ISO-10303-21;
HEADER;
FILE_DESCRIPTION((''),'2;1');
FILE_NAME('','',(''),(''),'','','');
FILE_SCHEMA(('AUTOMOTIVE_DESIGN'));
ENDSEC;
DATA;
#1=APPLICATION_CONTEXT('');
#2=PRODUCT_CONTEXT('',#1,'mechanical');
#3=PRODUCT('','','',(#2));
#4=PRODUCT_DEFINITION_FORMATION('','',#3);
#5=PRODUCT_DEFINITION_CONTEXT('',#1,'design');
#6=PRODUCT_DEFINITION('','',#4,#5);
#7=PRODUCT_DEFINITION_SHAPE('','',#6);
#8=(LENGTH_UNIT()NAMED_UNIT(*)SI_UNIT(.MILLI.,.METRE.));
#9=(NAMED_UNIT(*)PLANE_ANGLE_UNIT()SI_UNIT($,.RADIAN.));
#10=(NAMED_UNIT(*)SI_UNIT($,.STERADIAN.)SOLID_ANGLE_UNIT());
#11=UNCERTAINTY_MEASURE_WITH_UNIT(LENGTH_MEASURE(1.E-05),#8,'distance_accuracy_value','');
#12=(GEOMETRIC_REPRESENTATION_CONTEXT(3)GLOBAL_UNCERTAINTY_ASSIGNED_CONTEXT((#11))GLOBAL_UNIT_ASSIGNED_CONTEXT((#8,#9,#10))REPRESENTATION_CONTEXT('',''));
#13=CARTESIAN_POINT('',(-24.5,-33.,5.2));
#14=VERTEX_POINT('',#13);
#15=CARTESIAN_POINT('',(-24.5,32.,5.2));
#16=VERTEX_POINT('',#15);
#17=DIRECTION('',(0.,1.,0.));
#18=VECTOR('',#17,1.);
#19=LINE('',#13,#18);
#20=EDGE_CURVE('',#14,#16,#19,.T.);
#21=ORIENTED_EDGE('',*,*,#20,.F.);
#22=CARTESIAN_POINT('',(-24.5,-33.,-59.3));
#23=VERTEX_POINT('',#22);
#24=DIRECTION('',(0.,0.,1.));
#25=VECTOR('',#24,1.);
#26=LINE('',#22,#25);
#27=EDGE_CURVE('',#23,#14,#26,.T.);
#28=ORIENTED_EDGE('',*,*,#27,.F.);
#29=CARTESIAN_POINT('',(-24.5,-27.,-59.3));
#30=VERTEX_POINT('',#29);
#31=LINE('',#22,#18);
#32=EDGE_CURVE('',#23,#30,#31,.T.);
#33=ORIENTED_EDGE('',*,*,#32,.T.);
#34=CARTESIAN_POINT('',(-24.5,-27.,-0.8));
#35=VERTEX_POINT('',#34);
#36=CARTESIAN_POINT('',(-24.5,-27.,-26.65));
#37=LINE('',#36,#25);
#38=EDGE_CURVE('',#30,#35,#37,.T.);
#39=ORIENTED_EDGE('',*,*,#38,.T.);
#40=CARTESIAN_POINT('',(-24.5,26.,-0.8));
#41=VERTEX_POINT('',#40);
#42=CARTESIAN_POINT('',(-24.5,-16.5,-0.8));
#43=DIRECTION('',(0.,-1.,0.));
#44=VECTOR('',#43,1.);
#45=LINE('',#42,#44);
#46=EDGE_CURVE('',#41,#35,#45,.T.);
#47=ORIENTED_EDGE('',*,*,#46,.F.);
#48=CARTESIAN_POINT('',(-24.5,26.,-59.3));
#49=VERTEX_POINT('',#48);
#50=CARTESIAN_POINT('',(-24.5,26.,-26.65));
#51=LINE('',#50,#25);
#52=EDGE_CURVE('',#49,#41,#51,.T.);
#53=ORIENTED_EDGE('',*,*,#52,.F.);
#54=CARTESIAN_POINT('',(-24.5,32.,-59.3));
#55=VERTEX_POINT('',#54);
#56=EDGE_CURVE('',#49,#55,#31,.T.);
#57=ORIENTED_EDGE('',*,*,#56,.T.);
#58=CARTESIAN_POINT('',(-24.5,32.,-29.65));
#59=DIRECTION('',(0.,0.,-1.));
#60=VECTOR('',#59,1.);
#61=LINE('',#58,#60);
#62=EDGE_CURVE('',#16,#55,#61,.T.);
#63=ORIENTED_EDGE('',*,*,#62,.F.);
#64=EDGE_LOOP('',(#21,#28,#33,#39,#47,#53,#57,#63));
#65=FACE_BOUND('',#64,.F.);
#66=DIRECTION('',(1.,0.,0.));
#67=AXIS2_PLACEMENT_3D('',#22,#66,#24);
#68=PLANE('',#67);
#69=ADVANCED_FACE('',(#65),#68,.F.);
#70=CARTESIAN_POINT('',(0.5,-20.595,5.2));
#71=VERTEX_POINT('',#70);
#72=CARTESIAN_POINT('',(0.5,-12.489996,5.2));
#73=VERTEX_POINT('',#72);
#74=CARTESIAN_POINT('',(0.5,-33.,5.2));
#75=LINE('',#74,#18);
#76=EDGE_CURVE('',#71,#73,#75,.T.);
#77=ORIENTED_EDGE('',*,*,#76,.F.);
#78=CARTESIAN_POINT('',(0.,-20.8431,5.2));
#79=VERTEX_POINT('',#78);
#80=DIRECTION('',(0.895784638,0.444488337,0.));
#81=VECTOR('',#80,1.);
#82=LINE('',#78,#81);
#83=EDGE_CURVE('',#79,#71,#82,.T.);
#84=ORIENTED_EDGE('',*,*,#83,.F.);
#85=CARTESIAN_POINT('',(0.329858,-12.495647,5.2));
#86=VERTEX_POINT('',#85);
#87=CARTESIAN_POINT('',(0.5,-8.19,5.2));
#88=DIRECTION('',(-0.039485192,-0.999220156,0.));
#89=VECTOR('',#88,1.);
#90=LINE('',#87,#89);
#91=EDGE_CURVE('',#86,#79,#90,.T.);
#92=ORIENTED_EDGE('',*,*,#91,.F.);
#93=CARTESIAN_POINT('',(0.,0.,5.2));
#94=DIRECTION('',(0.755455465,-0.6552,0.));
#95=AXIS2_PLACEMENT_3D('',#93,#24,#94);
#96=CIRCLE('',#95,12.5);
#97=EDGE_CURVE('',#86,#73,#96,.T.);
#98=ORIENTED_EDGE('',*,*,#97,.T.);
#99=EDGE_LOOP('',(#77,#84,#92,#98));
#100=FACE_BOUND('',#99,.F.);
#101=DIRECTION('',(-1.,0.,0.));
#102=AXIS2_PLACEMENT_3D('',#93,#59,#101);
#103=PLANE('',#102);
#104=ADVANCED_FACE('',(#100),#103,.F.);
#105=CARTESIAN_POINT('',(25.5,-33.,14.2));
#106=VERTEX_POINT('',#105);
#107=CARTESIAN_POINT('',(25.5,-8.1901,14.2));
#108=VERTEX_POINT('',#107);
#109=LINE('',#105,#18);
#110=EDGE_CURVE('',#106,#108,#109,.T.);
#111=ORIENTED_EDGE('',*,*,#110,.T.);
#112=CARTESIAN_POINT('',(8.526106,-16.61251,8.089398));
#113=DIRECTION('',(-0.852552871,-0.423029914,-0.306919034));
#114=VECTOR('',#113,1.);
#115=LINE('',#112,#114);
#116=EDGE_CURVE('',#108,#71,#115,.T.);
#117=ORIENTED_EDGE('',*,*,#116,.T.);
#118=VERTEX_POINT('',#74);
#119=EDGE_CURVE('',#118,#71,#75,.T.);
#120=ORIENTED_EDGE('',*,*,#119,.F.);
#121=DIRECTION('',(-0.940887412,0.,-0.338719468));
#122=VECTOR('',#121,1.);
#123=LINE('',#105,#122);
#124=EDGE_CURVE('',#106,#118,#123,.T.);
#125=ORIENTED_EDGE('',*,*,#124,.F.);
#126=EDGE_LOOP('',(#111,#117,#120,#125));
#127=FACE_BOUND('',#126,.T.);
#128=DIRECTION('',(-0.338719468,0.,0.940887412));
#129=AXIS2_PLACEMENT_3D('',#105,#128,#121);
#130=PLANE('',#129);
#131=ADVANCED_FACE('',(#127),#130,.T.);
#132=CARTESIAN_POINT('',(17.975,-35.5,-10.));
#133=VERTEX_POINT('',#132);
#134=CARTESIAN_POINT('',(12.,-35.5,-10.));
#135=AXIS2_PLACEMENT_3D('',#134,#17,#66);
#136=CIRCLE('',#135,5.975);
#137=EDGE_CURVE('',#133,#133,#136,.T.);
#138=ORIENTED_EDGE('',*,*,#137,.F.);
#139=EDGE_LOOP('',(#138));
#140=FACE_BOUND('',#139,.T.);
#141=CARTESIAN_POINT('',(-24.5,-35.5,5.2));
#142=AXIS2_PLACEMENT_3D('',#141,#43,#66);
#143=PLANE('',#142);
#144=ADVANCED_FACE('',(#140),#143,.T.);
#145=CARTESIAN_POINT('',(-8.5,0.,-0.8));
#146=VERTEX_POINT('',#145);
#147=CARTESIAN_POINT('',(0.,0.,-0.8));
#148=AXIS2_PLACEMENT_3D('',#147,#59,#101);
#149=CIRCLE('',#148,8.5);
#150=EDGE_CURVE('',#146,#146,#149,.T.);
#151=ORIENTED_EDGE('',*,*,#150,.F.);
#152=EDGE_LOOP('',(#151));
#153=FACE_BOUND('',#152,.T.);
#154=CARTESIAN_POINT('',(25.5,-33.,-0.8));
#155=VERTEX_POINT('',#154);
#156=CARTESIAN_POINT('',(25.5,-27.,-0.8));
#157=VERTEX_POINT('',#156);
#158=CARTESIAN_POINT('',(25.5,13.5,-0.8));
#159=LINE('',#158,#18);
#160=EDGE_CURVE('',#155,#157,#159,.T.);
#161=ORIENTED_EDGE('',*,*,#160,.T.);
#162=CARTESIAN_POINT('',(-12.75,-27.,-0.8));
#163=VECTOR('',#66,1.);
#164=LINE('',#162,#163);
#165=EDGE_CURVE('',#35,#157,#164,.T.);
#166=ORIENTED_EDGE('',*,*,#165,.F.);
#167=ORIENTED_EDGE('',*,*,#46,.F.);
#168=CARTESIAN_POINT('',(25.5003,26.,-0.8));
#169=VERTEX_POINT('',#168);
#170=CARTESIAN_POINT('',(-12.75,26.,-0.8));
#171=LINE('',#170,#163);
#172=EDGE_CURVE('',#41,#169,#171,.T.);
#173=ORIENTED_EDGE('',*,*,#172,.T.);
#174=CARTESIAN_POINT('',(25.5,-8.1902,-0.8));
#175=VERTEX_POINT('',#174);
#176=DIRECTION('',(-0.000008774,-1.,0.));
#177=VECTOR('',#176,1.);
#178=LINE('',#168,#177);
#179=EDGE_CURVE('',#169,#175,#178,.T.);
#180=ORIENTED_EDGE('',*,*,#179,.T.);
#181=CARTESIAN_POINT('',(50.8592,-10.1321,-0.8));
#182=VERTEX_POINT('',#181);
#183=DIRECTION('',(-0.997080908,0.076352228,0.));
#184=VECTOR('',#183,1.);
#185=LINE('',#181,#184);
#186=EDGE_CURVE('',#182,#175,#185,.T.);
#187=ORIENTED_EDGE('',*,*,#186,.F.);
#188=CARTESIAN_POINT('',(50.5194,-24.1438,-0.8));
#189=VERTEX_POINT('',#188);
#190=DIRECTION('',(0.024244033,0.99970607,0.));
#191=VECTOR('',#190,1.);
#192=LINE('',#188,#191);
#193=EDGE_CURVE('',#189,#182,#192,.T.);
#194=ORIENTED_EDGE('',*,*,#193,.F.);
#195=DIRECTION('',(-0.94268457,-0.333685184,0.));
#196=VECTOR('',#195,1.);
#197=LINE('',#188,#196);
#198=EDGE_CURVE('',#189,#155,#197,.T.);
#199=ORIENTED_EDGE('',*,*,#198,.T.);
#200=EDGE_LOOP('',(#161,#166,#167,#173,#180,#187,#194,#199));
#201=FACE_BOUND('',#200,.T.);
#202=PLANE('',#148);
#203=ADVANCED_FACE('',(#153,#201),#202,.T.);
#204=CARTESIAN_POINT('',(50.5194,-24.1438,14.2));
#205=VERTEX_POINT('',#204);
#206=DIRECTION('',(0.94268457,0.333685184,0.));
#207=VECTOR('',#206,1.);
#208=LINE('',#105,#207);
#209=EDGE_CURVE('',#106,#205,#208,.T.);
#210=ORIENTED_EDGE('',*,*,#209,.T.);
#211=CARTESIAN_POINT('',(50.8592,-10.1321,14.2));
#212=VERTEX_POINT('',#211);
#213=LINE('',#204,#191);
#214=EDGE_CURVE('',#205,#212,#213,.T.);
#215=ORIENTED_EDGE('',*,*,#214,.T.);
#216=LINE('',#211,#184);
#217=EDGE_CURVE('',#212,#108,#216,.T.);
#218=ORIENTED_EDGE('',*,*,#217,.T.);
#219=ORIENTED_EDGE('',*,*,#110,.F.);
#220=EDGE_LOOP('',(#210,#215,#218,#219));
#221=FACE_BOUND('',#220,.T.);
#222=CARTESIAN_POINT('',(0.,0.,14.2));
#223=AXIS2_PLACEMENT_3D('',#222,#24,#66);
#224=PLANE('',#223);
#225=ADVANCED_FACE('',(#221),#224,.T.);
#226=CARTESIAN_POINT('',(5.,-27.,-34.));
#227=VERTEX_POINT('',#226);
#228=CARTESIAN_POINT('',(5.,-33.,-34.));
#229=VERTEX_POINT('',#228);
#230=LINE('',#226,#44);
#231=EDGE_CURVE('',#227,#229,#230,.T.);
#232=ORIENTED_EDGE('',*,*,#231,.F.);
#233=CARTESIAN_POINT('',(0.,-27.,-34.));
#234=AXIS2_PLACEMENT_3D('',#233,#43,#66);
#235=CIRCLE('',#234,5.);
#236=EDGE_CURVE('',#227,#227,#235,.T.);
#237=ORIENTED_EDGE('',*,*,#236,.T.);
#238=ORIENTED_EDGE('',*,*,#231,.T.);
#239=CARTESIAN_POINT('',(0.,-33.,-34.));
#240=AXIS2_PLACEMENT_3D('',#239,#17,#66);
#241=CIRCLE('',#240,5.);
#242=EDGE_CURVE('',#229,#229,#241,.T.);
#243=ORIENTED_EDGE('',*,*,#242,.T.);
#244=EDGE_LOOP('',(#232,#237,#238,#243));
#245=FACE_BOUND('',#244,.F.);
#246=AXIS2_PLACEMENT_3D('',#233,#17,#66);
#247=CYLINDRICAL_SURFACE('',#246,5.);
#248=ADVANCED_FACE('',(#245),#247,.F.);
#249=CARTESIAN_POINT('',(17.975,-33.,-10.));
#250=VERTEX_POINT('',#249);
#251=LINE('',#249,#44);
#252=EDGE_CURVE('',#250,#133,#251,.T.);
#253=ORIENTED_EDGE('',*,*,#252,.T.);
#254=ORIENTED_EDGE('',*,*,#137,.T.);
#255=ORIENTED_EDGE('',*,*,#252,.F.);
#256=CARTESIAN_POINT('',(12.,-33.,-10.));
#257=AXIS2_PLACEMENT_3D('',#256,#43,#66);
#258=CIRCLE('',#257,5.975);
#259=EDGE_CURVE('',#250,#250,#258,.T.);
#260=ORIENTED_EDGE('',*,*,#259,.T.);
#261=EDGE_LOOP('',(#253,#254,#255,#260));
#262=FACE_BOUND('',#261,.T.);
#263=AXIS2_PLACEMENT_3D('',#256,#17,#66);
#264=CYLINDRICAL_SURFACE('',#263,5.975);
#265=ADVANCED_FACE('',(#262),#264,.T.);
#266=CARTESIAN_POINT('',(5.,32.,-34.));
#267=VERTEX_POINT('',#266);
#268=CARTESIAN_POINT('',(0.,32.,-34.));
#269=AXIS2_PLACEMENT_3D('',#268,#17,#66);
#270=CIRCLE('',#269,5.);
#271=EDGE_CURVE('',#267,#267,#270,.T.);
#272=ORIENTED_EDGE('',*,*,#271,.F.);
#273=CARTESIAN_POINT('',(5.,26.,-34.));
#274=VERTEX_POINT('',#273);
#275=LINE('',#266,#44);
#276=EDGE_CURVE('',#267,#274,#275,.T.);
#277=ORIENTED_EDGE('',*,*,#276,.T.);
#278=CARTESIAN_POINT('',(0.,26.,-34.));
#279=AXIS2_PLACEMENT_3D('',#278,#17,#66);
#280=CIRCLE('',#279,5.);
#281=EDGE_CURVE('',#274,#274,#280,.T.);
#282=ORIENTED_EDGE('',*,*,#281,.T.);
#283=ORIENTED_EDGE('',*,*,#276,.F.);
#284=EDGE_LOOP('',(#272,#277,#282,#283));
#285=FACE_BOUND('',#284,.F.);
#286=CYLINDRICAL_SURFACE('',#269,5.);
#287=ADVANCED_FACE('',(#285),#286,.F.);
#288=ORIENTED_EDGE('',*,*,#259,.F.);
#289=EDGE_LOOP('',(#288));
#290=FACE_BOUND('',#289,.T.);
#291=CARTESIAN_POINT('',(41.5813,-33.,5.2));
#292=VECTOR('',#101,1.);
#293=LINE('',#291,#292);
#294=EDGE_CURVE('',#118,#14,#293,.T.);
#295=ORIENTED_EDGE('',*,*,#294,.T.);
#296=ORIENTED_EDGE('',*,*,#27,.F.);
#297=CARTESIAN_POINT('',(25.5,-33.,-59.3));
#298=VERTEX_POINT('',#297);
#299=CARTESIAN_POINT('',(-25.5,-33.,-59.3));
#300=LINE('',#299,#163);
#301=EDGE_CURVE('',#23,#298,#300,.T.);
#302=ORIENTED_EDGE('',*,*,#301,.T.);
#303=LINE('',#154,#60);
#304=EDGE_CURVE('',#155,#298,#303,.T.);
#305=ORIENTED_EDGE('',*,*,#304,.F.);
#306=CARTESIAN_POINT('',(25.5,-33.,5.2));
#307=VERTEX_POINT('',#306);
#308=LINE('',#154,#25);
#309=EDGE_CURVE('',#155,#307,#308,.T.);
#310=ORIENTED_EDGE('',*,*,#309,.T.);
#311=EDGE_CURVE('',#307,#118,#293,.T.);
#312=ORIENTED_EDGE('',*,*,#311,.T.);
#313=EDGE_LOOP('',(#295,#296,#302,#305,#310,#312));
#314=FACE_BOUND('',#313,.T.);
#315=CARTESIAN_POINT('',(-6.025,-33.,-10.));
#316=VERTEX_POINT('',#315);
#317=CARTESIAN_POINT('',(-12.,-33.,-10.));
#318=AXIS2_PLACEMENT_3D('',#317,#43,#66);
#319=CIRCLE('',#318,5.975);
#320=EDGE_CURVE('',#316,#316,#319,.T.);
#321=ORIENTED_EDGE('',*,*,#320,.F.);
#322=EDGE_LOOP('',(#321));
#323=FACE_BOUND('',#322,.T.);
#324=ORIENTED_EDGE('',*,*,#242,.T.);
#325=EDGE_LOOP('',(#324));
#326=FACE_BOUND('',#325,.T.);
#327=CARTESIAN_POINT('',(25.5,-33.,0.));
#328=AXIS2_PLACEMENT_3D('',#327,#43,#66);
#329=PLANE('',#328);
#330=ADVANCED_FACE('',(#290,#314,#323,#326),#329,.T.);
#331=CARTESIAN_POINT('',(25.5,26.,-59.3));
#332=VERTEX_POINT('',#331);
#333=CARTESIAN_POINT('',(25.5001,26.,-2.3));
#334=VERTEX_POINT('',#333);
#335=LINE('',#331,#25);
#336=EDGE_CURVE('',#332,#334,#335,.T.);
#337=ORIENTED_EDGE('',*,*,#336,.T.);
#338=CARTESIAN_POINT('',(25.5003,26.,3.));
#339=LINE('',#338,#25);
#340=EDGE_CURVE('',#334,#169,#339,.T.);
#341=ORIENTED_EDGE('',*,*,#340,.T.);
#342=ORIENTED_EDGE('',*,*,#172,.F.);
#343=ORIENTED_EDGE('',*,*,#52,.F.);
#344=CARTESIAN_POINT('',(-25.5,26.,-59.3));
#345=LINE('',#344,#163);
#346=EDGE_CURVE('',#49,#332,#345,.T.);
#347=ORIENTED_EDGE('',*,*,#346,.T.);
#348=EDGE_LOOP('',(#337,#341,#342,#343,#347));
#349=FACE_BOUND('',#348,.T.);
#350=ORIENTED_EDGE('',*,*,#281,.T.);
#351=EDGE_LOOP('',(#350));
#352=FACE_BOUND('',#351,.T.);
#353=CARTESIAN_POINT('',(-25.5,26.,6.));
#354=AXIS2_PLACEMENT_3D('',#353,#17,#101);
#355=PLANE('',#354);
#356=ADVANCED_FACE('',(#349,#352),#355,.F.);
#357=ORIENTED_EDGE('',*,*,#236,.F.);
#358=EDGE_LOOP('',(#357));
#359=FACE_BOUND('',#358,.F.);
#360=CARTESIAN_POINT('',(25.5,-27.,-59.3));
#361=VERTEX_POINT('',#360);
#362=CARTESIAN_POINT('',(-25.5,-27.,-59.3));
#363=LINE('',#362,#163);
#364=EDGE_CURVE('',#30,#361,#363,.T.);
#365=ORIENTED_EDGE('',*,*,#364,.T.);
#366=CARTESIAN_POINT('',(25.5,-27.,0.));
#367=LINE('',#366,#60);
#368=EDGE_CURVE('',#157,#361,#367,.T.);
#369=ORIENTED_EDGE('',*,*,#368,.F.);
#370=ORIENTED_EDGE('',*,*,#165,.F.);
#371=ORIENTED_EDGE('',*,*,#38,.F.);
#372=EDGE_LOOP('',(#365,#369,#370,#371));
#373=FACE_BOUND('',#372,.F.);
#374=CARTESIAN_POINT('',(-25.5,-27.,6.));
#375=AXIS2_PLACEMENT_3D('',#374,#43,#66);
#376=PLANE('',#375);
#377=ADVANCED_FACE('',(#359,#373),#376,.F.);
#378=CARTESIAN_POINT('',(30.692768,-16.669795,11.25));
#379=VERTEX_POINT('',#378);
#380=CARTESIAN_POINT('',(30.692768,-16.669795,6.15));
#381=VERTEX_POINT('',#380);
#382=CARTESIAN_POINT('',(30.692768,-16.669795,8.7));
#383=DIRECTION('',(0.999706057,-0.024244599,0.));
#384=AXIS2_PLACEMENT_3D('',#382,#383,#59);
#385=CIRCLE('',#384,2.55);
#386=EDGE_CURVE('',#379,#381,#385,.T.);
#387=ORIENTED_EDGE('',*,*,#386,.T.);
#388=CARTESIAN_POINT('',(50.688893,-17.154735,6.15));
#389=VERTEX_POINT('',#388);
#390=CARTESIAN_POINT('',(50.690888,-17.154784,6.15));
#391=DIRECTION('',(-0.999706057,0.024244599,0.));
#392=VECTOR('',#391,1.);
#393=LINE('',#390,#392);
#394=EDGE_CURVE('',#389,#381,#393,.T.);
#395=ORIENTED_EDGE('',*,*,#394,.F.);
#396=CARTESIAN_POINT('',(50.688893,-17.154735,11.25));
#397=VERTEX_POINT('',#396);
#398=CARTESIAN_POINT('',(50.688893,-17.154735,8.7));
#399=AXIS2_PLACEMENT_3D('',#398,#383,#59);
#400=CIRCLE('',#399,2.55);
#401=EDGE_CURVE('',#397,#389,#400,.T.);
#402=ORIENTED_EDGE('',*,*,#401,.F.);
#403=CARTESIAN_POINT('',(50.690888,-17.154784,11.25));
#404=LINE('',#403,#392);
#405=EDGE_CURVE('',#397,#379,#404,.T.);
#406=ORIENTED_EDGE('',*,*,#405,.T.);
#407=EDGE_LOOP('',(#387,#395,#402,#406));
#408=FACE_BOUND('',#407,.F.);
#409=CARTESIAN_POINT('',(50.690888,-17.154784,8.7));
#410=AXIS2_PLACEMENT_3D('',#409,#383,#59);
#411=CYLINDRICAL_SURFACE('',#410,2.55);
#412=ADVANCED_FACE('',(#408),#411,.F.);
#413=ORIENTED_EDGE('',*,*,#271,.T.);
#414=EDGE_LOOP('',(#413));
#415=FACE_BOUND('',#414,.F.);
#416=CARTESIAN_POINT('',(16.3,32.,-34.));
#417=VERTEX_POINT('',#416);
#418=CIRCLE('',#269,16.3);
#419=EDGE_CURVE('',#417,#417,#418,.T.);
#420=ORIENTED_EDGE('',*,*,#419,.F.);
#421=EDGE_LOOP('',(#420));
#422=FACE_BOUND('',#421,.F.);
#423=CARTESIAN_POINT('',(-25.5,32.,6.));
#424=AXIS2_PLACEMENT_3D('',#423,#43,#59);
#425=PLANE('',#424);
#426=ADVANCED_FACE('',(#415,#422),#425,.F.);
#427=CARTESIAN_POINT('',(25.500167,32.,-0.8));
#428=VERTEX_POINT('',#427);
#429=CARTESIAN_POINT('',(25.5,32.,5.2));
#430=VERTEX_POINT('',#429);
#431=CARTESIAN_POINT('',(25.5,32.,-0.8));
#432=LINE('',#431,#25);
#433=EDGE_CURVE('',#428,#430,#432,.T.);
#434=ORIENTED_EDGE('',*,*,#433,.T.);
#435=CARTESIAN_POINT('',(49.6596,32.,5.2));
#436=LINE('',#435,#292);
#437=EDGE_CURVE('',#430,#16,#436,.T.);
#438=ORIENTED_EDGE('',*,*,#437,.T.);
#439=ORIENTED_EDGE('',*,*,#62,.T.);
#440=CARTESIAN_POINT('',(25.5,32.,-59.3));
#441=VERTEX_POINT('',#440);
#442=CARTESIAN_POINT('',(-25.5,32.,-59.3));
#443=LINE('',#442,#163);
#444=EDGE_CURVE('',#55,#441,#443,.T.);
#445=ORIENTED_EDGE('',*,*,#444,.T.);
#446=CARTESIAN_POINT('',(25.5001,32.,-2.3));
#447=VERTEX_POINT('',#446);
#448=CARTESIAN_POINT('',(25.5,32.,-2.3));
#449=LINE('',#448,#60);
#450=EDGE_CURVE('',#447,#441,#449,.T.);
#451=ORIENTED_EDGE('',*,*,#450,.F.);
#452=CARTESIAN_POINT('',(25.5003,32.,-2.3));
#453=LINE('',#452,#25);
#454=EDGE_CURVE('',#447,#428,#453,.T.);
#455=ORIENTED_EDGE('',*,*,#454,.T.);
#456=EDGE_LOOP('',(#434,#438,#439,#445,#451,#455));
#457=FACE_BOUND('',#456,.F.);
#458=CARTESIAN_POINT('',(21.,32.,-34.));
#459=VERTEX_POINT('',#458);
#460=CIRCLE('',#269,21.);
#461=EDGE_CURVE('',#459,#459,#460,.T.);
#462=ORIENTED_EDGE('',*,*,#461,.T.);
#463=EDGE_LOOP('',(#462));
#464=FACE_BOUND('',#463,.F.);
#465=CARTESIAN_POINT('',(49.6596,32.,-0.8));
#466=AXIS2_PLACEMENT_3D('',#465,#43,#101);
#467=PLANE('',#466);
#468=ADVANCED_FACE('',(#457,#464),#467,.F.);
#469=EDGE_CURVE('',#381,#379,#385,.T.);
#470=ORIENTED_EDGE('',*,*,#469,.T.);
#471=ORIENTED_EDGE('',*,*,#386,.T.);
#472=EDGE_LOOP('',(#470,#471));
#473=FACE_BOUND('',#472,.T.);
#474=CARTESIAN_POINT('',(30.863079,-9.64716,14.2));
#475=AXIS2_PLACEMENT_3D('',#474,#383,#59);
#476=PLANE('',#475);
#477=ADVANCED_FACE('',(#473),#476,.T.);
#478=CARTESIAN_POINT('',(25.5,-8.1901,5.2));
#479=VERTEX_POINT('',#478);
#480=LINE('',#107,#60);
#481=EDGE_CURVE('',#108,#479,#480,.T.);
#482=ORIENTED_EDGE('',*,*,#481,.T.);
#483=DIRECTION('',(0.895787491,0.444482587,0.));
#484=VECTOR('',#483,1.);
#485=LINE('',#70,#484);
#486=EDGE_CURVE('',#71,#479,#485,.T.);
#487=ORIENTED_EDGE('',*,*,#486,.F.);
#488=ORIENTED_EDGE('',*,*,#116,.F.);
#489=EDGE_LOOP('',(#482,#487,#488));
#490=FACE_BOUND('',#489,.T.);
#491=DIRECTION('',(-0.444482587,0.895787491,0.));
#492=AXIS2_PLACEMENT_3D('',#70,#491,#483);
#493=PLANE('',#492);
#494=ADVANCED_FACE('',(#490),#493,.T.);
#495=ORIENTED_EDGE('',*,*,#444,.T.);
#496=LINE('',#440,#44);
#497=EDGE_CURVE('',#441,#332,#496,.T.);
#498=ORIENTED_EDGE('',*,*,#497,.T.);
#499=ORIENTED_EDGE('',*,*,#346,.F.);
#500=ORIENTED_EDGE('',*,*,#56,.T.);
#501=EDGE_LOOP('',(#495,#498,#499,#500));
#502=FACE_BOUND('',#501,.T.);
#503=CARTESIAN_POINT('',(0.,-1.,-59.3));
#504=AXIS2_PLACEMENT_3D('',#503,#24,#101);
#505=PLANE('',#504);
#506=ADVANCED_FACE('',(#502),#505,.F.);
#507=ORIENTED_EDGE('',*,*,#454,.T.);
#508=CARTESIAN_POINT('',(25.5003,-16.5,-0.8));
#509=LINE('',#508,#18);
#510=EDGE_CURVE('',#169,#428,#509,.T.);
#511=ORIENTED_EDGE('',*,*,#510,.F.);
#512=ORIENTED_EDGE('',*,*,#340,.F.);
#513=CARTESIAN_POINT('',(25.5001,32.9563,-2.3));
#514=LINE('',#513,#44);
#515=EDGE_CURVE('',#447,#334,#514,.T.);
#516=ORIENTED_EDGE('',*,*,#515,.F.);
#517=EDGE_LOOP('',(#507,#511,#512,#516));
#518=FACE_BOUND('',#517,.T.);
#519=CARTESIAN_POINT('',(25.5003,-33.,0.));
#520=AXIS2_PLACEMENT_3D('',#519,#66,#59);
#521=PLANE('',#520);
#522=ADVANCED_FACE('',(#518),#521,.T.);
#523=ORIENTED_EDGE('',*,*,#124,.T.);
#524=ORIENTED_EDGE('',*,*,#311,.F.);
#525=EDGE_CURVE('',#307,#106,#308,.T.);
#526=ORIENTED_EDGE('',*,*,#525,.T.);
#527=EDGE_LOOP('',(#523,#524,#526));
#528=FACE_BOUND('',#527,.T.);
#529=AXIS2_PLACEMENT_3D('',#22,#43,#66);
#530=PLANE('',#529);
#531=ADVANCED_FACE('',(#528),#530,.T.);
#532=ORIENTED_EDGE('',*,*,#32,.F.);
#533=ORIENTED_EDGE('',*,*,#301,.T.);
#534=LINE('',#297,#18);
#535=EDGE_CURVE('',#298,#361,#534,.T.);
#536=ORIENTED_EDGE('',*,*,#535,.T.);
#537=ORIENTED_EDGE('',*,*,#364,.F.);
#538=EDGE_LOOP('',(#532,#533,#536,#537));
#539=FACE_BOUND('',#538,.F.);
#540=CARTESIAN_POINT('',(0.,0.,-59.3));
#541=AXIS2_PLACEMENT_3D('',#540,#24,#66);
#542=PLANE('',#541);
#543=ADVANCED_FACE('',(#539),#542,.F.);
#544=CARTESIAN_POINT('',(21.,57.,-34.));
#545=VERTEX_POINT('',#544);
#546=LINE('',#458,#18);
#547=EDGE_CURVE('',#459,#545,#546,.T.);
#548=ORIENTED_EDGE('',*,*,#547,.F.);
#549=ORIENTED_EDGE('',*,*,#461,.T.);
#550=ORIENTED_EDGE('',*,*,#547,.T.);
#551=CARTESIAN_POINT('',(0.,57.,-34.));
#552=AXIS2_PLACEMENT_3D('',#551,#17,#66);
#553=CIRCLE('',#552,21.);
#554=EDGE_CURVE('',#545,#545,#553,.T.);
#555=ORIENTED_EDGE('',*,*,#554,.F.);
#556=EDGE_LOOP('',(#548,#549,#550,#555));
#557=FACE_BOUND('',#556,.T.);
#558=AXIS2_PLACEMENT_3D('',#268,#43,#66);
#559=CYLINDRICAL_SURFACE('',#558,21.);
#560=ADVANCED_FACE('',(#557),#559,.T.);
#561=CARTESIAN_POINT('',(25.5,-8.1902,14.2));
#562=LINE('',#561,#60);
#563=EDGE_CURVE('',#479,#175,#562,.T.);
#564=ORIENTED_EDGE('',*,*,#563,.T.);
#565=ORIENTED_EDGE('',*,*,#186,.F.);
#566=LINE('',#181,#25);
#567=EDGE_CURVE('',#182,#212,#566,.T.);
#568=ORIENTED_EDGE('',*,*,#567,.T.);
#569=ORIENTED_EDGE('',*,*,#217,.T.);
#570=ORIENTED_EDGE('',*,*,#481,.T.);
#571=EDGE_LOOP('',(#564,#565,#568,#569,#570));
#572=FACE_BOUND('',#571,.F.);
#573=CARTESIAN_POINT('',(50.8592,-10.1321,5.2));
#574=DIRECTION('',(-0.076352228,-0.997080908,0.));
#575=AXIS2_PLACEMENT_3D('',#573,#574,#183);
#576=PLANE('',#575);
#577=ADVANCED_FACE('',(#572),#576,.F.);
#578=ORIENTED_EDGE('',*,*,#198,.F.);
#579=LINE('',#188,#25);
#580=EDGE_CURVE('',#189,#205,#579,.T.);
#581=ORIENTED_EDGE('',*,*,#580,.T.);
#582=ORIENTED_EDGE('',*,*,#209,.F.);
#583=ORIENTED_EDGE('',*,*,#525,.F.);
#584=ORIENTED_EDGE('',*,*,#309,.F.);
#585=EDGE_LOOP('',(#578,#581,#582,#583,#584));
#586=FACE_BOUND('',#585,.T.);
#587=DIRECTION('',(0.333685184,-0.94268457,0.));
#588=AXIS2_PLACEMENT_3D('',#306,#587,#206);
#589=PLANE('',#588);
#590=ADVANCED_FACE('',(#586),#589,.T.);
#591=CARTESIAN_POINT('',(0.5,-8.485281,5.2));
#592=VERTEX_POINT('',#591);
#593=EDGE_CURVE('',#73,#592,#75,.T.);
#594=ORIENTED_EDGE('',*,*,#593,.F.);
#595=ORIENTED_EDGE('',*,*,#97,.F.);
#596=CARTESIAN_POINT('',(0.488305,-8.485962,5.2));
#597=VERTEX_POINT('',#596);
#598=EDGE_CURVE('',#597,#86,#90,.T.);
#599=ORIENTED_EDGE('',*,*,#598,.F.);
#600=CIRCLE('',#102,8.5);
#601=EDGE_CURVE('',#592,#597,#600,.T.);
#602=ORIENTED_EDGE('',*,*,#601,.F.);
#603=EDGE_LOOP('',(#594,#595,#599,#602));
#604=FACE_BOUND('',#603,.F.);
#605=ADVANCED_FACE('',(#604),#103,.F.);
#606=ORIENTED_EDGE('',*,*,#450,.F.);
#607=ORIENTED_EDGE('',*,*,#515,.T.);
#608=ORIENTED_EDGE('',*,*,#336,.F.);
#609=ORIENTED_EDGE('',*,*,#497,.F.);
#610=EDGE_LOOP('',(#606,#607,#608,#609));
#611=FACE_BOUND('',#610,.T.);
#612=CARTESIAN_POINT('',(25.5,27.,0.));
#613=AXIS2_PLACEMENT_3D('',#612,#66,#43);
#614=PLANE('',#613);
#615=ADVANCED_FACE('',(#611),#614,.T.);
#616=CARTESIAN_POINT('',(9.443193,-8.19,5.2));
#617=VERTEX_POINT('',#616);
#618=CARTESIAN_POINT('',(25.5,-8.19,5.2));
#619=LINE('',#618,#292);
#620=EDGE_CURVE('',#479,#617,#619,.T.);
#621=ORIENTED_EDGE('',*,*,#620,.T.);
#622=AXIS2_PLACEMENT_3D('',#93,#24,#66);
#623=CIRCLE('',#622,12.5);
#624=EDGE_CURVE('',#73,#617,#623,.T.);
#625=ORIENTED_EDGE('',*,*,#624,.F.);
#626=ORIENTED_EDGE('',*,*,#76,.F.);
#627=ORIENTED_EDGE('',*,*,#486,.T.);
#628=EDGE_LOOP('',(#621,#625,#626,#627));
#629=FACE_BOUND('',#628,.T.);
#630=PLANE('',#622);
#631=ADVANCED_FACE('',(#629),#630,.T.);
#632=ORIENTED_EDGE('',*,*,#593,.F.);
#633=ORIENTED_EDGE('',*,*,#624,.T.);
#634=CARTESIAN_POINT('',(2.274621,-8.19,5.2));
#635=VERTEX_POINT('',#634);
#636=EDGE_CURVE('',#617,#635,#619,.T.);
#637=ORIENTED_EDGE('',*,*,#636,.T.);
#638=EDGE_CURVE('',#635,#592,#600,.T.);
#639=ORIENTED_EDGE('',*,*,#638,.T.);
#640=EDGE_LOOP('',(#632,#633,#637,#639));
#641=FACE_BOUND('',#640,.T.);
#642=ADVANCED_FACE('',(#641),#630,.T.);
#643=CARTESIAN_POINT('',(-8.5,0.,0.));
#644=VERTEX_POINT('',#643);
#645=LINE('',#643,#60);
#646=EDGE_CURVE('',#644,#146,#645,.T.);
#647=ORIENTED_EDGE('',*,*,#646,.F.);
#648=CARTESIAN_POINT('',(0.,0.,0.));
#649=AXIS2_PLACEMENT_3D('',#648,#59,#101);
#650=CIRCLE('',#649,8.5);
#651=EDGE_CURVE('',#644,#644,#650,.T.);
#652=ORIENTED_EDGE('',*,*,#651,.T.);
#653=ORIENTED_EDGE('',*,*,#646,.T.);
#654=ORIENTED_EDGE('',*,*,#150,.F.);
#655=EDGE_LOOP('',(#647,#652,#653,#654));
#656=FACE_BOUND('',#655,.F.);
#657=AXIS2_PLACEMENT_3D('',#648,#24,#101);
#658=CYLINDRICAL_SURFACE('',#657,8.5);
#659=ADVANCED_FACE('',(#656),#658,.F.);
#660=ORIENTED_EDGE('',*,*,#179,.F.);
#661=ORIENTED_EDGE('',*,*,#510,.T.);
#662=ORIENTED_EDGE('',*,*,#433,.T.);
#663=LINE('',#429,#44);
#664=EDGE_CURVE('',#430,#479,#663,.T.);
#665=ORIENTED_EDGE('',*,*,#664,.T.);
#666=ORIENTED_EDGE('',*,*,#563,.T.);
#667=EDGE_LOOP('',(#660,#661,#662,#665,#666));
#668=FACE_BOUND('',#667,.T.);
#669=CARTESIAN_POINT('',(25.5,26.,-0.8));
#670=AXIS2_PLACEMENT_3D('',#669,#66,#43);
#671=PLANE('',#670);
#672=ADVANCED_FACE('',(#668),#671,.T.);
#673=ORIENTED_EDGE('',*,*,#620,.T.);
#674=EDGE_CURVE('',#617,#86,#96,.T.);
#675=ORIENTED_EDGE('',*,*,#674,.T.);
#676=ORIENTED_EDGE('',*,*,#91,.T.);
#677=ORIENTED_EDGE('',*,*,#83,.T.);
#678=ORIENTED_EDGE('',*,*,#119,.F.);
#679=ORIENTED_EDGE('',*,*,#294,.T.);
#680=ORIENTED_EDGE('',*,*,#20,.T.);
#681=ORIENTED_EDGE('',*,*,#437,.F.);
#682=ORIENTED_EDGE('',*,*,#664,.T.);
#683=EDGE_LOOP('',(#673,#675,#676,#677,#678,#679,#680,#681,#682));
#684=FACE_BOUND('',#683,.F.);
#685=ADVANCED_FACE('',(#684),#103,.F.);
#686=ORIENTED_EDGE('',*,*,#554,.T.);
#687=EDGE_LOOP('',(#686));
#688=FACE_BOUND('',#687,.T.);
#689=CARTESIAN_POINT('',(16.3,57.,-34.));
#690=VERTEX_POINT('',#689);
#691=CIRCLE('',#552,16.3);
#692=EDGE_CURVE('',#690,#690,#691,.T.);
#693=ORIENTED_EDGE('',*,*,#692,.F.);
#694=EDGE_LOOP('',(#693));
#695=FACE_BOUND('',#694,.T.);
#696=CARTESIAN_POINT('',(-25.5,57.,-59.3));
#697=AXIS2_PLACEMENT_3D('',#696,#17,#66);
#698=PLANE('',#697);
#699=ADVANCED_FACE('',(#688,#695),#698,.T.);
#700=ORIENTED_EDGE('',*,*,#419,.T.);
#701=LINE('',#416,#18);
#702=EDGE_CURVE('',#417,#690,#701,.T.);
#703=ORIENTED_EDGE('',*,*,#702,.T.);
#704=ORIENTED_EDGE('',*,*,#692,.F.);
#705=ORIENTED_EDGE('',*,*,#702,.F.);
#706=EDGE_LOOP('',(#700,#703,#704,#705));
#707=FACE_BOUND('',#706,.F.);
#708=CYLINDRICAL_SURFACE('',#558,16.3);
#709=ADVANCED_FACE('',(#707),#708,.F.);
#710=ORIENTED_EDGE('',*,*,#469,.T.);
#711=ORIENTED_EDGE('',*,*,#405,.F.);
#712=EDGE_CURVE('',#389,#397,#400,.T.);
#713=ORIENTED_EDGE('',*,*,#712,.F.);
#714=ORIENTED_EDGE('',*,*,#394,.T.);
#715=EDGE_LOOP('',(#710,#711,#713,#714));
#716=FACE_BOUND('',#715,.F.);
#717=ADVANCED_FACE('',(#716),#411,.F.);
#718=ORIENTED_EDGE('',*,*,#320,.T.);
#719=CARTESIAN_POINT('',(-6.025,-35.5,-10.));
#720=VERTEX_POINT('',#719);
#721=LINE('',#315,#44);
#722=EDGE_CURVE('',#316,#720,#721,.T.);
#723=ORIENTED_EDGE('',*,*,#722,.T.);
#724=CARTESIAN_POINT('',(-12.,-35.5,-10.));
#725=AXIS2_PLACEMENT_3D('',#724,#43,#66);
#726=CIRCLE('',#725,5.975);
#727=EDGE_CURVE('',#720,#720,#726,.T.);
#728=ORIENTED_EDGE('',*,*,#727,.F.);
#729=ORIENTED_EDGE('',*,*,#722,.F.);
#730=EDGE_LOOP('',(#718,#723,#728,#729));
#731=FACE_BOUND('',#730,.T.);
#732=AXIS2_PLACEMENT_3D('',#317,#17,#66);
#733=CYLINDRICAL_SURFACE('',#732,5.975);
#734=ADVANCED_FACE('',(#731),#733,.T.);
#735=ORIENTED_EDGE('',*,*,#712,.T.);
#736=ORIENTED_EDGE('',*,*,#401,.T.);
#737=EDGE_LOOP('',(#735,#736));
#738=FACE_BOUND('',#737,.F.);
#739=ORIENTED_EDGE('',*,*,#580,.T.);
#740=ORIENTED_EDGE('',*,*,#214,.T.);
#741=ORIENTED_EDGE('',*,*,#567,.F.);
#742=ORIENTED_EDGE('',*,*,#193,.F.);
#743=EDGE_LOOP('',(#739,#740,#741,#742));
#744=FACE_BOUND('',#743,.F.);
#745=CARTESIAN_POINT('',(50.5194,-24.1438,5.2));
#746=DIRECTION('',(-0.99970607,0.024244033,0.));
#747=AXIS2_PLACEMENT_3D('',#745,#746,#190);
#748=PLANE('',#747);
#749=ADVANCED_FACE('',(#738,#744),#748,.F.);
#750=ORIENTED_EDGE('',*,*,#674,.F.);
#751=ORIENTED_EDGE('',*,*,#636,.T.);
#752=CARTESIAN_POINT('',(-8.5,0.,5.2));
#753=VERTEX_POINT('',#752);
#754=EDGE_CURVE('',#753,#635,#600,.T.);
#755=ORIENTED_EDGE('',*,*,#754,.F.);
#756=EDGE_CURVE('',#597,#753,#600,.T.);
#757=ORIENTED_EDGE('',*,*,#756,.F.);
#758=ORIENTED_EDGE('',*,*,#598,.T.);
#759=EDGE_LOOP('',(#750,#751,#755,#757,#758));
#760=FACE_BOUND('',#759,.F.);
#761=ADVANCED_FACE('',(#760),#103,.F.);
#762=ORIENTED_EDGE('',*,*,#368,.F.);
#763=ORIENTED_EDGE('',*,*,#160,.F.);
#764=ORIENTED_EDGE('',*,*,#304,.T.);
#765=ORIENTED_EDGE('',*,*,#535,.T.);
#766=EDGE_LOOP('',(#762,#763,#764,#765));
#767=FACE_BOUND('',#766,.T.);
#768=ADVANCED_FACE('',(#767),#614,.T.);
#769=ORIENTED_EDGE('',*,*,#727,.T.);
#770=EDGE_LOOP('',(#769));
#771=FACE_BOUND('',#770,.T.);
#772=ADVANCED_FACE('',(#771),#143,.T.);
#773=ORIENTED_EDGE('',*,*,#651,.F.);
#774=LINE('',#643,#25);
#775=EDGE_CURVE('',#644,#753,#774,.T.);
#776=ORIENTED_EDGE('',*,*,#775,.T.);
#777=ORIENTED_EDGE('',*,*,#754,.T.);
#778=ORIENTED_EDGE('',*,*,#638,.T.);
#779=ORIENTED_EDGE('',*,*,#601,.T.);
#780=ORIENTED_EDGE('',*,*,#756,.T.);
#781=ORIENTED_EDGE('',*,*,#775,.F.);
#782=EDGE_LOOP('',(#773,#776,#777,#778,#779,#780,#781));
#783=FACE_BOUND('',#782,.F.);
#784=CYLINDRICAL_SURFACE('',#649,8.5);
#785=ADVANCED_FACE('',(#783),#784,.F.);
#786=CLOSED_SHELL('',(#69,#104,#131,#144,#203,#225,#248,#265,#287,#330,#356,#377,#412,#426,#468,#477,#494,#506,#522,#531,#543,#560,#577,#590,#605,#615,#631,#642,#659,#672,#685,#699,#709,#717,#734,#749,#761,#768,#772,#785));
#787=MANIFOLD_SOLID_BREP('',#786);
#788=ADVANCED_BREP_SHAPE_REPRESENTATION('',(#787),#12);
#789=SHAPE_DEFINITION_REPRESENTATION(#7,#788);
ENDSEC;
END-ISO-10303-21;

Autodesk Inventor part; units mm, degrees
sketch "Sketch1" plane through (0, 0, 0) normal (0, 0, 1) x (1, 0, 0)
  line L0 (25.5, -27) -> (-25.5, -27)
  line L1 (-25.5, -27) -> (-25.5, 27)
  line L2 (-25.5, 27) -> (25.5, 27)
  line L3 (25.5, 27) -> (25.5, -27)
  line L4 (25.5, -27) -> (-25.5, 27) construction
  line L5 (-25.5, -27) -> (25.5, 27) construction
  point P0 (0, 0)
  dimension "d0" = 51
  dimension "d1" = 54
extrude "Extrusion1" add sketch "Sketch1" along normal blind 6
sketch "Sketch2" plane through (0, 0, 6) normal (0, 0, 1) x (1, 0, 0)
  circle A0 centre (0, 0) radius 15
  dimension "d4" = 30
sketch "Sketch4" plane through (0, 0, 6) normal (0, 0, 1) x (1, 0, 0)
  line L0 (-25.5, 27) -> (26.5, 27)
  line L1 (-25.5, -27) -> (25.5, -27) projected
  line L2 (25.5, -27) -> (-25.5, -27)
  line L3 (-25.5, -27) -> (-25.5, -33)
  line L4 (-25.5, -33) -> (25.5, -33)
  line L5 (25.5, -33) -> (25.5, -27)
  point P0 (0, 0)
  dimension "d109" = 51
  dimension "d110" = 6
extrude "Extrusion4" add sketch "Sketch4" against normal blind 65.3
ref_plane "Plano de trabajo8" through (25.5, -33.8, -42) normal (1, 0, 0) x (0, 0, -1)
ref_plane "Work Plane9" through (-10.5, -27, -57) normal (0, 1, 0) x (1, 0, 0)
sketch "Sketch25" plane through (-10.5, -27, -57) normal (0, 1, 0) x (1, 0, 0)
  line L0 (0, 0) -> (21, 0) projected
  line L1 (10.5, 0) -> (10.5, -23)
  circle A0 centre (10.5, -23) radius 5
  line L2 (10.5, -23) -> (10.5, -63)
  line L3 (36, -63) -> (-15, -63) projected
  point P0 (10.5, -57)
  dimension "d111" = 23
  dimension "d112" = 10
extrude "Extrusion22" cut sketch "Sketch25" against normal blind 68
ref_plane "Work Plane7" through (-10.5, -0.5, -57) normal (0, 1, 0) x (1, 0, 0)
mirror "Mirror2" about plane through (-10.5, -0.5, -57) normal (0, 1, 0) of "Extrusion4"
extrude "Extrusión28" cut sketch "Sketch2" against normal blind 10
ref_plane "Work Plane10" through (25.5, -34, -42) normal (1, 0, 0) x (0, 0, -1)
ref_plane "Work Plane11" through (-25.5, -87, 1.3) normal (0, 1, 0) x (1, 0, 0)
sketch "Sketch37" plane through (-25.5, 32, 6) normal (0, 1, 0) x (1, 0, 0)
  circle A0 centre (25.5, 40) radius 5 projected
  point P0 (25.5, 6)
extrude "Extrusion33" cut sketch "Sketch37" against normal blind 68
sketch "Sketch43" plane through (0, 0, 6) normal (0, 0, 1) x (1, 0, 0)
  circle A0 centre (0, 0) radius 10.4895
  circle A1 centre (0, 0) radius 15 projected
  circle A2 centre (0, 0) radius 5
  dimension "d182" = 10
extrude "Extrusion40" add sketch "Sketch43" against normal blind 8.3 contours A0 | A1
sketch "Boceto48" plane through (-25.5, -33, 6) normal (0, -1, 0) x (1, 0, 0)
  point P0 (25.5, -6)
sketch "Boceto49" plane through (-25.5, -33, 6) normal (0, -1, 0) x (1, 0, 0)
  point P0 (25.5, -6)
sketch "Boceto50" plane through (25.5, 26, -59.3) normal (0, 0, -1) x (-1, 0, 0)
  point P0 (25.5, -26)
sketch "Boceto77" plane through (0, 0, 6) normal (0, 0, 1) x (1, 0, 0)
  point P0 (0, 0)
sketch "Boceto84" plane through (25.5, -33, -59.3) normal (1, 0, 0) x (0, 0, -1)
  line L0 (-65.3, 0) -> (-65.3, 65) projected
  line L1 (-65.3, 0) -> (-65.3, 32.3804)
  line L2 (-65.3, 32.3804) -> (-80.5662, 32.3804)
  line L3 (-80.5662, 32.3804) -> (-80.5662, -6.9517)
  line L4 (-80.5662, -6.9517) -> (-65.3, -6.9517)
  line L5 (-65.3, -6.9517) -> (-65.3, 0)
  point P0 (-59.3, 33)
  point P1 (-65.3, 66.9563)
  point P2 (-65.3, 65.9563)
extrude "Extrusión80" cut sketch "Boceto84" along normal mid plane 100
sketch "Boceto85" plane through (0, 0, 0) normal (0, 0, -1) x (-1, 0, 0)
  line L0 (-25.5, -33) -> (-25.5, -4.0448)
  line L1 (-25.5, -27) -> (-25.5, 26) projected
  line L2 (-25.5, -4.0448) -> (-53.9802, -4.6672)
  line L3 (-53.9802, -4.6672) -> (-54.6281, -33.6366)
  line L4 (-54.6281, -33.6366) -> (-25.5, -33)
  point P0 (0, 0)
  point P1 (-25.5, -13.7947)
extrude "Extrusión81" cut sketch "Boceto85" along normal mid plane 100
sketch "Boceto90" plane through (0, 0, 6) normal (0, 0, 1) x (1, 0, 0)
  circle A0 centre (0, 0) radius 5.2249
  circle A1 centre (0, 0) radius 14.4421
extrude "Extrusión86" add sketch "Boceto90" along normal blind 4.7
fillet "Empalme20" radius 2 1 edges at (-14.4421, 0, 6)
sketch "Boceto91" plane through (0, 0, 0) normal (0, 0, -1) x (-1, 0, 0)
  point P0 (0, 0)
sketch "Boceto92" plane through (0, 0, 0) normal (0, 0, -1) x (-1, 0, 0)
  point P0 (0, 0)
sketch "Boceto93" plane through (0, 0, 0) normal (0, 0, -1) x (-1, 0, 0)
  line L0 (-25.5, -27) -> (-25.5, 26) projected
  line L1 (-25.5, 1.3668) -> (-41.5813, 1.3668)
  line L2 (-41.5813, 1.3668) -> (-41.5813, -33)
  line L3 (-25.5, -33) -> (-41.5813, -33)
  line L4 (-25.5, -33) -> (-25.5, 32.9563) projected
  line L5 (-25.5, 1.3668) -> (-25.5, -33)
  point P0 (0, 0)
extrude "Extrusión87" add sketch "Boceto93" against normal blind 8.3
sketch "Boceto94" plane through (0, 0, 6) normal (0, 0, 1) x (1, 0, 0)
  line L0 (41.5813, -33) -> (41.5813, 1.3668) projected
  line L1 (41.5813, 1.3668) -> (41.5813, 35.5236)
  line L2 (-25.5, 32.9563) -> (25.5, 32.9563) projected
  line L3 (25.5, 32.9563) -> (41.5813, 32.9563)
  line L4 (25.5, 32.9563) -> (25.5, 1.3668)
  line L5 (25.5, 1.3668) -> (41.5813, 1.3668)
  point P0 (0, 0)
extrude "Extrusión88" add sketch "Boceto94" against normal blind 8.3
sketch "Boceto95" plane through (0, 0, 6) normal (0, 0, 1) x (1, 0, 0)
  circle A0 centre (37.8913, -24.81) radius 2.6
  line L0 (35.2913, -24.81) -> (37.8913, -24.81)
  point P0 (0, 0)
  point P1 (41.5813, -33)
  dimension "d305" = 5.2
extrude "Extrusión89" cut sketch "Boceto95" against normal blind 8.3
sketch "Boceto97" plane through (-25.5, -33, -59.3) normal (-1, 0, 0) x (0, 0, 1)
  line L0 (59.3, 0) -> (67.6, 0) projected
  line L1 (67.6, 0) -> (89.1392, 0)
  line L2 (89.1392, 0) -> (89.1392, 69.8717)
  line L3 (89.1392, 69.8717) -> (67.6, 69.8717)
  line L4 (67.6, 69.8717) -> (67.6, 0)
  point P0 (59.3, 33)
extrude "Extrusión92" cut sketch "Boceto97" against normal blind 1000
sketch "Boceto98" plane through (-25.5, -33, -59.3) normal (-1, 0, 0) x (0, 0, 1)
  line L0 (59.3, 59) -> (59.3, 6) projected
  line L1 (59.3, 59) -> (58.3, 59) projected
  line L2 (59.3, 6) -> (59.3, 59)
  line L3 (59.3, 59) -> (56.1979, 59)
  line L4 (59.3, 59) -> (0, 59) projected
  line L5 (56.1979, 59) -> (56.1979, 6)
  line L6 (59.3, 6) -> (0, 6) projected
  line L7 (56.1979, 6) -> (59.3, 6)
  line L8 (65.3, 65) -> (0, 65) projected
  line L9 (56.1979, 65) -> (56.1979, 67.4992)
  line L10 (56.1979, 67.4992) -> (67.7631, 67.4992)
  line L11 (67.7631, 67.4992) -> (76.364, 67.4992)
  line L12 (76.364, 67.4992) -> (76.364, -7.6447)
  line L13 (65.3, 0) -> (65.3, 34.3668) projected
  line L14 (65.3, 0) -> (65.3, -7.6447)
  line L15 (65.3, -7.6447) -> (76.364, -7.6447)
  line L16 (65.3, 0) -> (65.3, 65)
  line L17 (65.3, 0) -> (65.3, 65) projected
  line L18 (56.1979, 65) -> (65.3, 65)
  point P0 (59.3, 33)
  point P1 (59.3, 51.8098)
  point P2 (58.3, 65)
  point P3 (65.3, 65.9563)
  point P4 (59.3, 51.8098)
  point P5 (58.3, 65)
  point P6 (65.3, 34.3668)
extrude "Extrusión93" cut sketch "Boceto98" along normal mid plane 1000
sketch "Boceto99" plane through (41.5813, -33, 0) normal (1, 0, 0) x (0, 0, -1)
  line L0 (0, 58.9816) -> (2.3, 58.9816)
  line L1 (2.3, 65) -> (2.3, 59) projected
  line L2 (2.3, 58.9816) -> (2.3, 65)
  line L3 (2.3, 65) -> (2.3, 58.9816)
  line L4 (2.3, 65) -> (0, 65)
  line L5 (-6, 65) -> (59.3, 65) projected
  line L6 (0, 58.9816) -> (0, 65)
  point P0 (0, 33)
extrude "Extrusión94" cut sketch "Boceto99" against normal blind 16.081
sketch "Boceto100" plane through (25.5, 26, -59.3) normal (0, 0, -1) x (-1, 0, 0)
  line L0 (-16.0813, 6) -> (-0.0003, 6) projected
  line L1 (0, 0) -> (-16.0813, 0)
  line L2 (-16.0813, 0) -> (-16.0813, 6)
  line L3 (-16.0813, 6) -> (0, 6)
  line L4 (0, 6) -> (0, 0)
  point P0 (25.5, -26)
  point P1 (-0.0003, 6)
extrude "Extrusión95" cut sketch "Boceto100" against normal blind 59.3
sketch "Boceto101" plane through (0, 0, 0) normal (0, 0, -1) x (-1, 0, 0)
  circle A0 centre (0, 0) radius 8.5
  dimension "d322" = 17
extrude "Extrusión96" cut sketch "Boceto101" against normal blind 59.3
sketch "Boceto102" plane through (-25.5, 32, -59.3) normal (0, 1, 0) x (1, 0, 0)
  circle A0 centre (25.5, -25.3) radius 5 projected
  circle A1 centre (25.5, -25.3) radius 16.3
  circle A2 centre (25.5, -25.3) radius 21
  point P0 (25.5, -59.3)
  dimension "d325" = 32.6
  dimension "d326" = 42
extrude "Extrusión97" add sketch "Boceto102" along normal blind 25 contours A2
sketch "Boceto103" plane through (-25.5, -27, -59.3) normal (0, 1, 0) x (1, 0, 0)
  point P0 (25.5, -59.3)
sketch "Boceto104" plane through (0, 0, 6) normal (0, 0, 1) x (1, 0, 0)
  line L0 (-25.5, -33) -> (-25.5, 32) projected
  line L1 (41.5813, 32) -> (41.5813, -33) projected
  line L2 (-25.5, 32) -> (41.5813, 32)
  line L3 (41.5813, 32) -> (41.5813, -33)
  line L4 (41.5813, -33) -> (-25.5, -33)
  line L5 (-25.5, -33) -> (-25.5, 32)
  point P0 (0, 0)
extrude "Extrusión98" cut sketch "Boceto104" against normal blind 0.8
sketch "Boceto105" plane through (0, 0, 0) normal (0, 0, -1) x (-1, 0, 0)
  line L0 (-25.5, -33) -> (25.5, -33) projected
  line L1 (-41.5813, 32) -> (25.5, 32)
  line L2 (25.5, 32) -> (25.5, -33)
  line L3 (25.5, -33) -> (-41.5813, -33)
  line L4 (-41.5813, -33) -> (-41.5813, 32)
  circle A0 centre (-37.8913, -24.81) radius 2.6 projected
  circle A1 centre (-37.8913, -24.81) radius 2.6
  circle A2 centre (0, 0) radius 8.5
extrude "Extrusión99" add sketch "Boceto105" along normal blind 0.8
sketch "Boceto106" plane through (-25.5, -33, -59.3) normal (0, -1, 0) x (1, 0, 0)
  line L0 (0, 0) -> (51, 0) projected
  line L1 (67.0813, 64.5) -> (0, 64.5) projected
  line L2 (0, 0) -> (1, 0)
  line L3 (1, 0) -> (1, 64.5)
  line L4 (1, 64.5) -> (0, 64.5)
  line L5 (0, 64.5) -> (0, 0)
  point P0 (25.5, 59.3)
  point P1 (0, 64.5)
  point P2 (1, 0)
  dimension "d333" = 1
extrude "Extrusión100" cut sketch "Boceto106" against normal blind 1000
sketch "Boceto107" plane through (0, 0, -0.8) normal (0, 0, -1) x (-1, 0, 0)
  line L0 (-25.5, -33) -> (-25.5, -38.9196)
  line L1 (-25.5, -38.9196) -> (-33.0828, -52.767)
  line L2 (-33.0828, -52.767) -> (-34.3078, -45.7968) construction
  line L3 (-41.5813, -33) -> (24.5, -33) projected
  spline S0 degree 3 poles (-33.0828, -52.767) (-34.3078, -45.7968) (-36.0426, -41.6296) (-38.17, -38.0712) knots 1 1 1 1 1.670244 1.670244 1.670244 1.670244
  line L4 (-41.5813, 32) -> (-41.5813, -33) projected
  line L5 (-37.8729, -38.2076) -> (-46.4829, -34.2556)
  line L6 (-46.4829, -34.2556) -> (-46.4829, 32)
  line L7 (-46.4829, 32) -> (-41.5813, 32)
  line L8 (-34.3078, -45.7968) -> (-36.0426, -41.6296) construction
  line L9 (-36.0426, -41.6296) -> (-38.17, -38.0712) construction
  point P0 (0, 0)
extrude "Extrusión101" add sketch "Boceto107" against normal blind 6
fillet "Empalme21" radius 2 2 edges at (38.17, -38.0712, 2.2) (46.4829, -34.2556, 2.2)
sketch "Boceto108" plane through (-24.5, -33, 5.2) normal (0, -1, 0) x (1, 0, 0)
  circle A0 centre (24.5, -39.2) radius 5 projected
  line L0 (24.5, -39.2) -> (24.5, -15.2)
  line L1 (50, -6) -> (0, -6) projected
  line L2 (24.5, -15.2) -> (32.2045, -6)
  line L3 (32.2045, -6) -> (24.5, -15.2)
  line L4 (24.5, -15.2) -> (36.5, -15.2)
  line L5 (36.5, -15.2) -> (12.5, -15.2)
  circle A1 centre (36.5, -15.2) radius 5.975
  circle A2 centre (12.5, -15.2) radius 5.975
  point P0 (24.5, -5.2)
  dimension "d340" = 24
  dimension "d341" = 12
  dimension "d342" = 12
  dimension "d343" = 24
  dimension "d344" = 11.95
  dimension "d345" = 11.95
extrude "Extrusión102" add sketch "Boceto108" along normal blind 2.5 contours A1 | A2
sketch "Boceto109" plane through (0, 0, -0.8) normal (0, 0, -1) x (-1, 0, 0)
  line L0 (-45.3172, -34.7906) -> (-38.7421, -37.8086) projected
  line L1 (-45.3172, -34.7906) -> (-49.6596, -32.7974)
  line L2 (-49.6596, -32.7974) -> (-49.6596, 32)
  line L3 (-46.4829, 32) -> (-46.4829, -32.9729) projected
  line L4 (-49.6596, 32) -> (-46.4829, 32)
  arc A0 (-46.4829, -32.9729) -> (-45.3172, -34.7906) centre (-44.4829, -32.9729) ccw projected
  line L5 (-46.4829, 32) -> (-45.3172, -34.7906)
  point P0 (0, 0)
extrude "Extrusión103" add sketch "Boceto109" against normal blind 6 contours L1 L2 L4 L3 A0
fillet "Empalme23" radius 4 2 edges at (49.6596, -32.7974, 2.2) (49.6596, 32, 2.2)
sketch "Boceto110" plane through (0, 0, 5.2) normal (0, 0, 1) x (1, 0, 0)
  line L0 (33.0828, -52.767) -> (25.5, -38.9196) projected
  line L1 (25.5, -38.9196) -> (37.9157, -38.9196)
  line L2 (37.9157, -38.9196) -> (33.0828, -52.767)
  line L3 (33.0828, -52.767) -> (25.5, -38.9196)
  point P0 (0, 0)
extrude "Extrusión104" cut sketch "Boceto110" against normal blind 10
sketch "Sketch111" plane through (0, 0, 5.2) normal (0, 0, 1) x (1, 0, 0)
  line L0 (25.5, -33) -> (25.5, -38.9196) projected
  line L1 (38.7421, -37.8086) -> (47.3283, -33.8675) projected
  line L2 (25.5, -33) -> (47.3283, -33.8675)
  line L3 (37.6774, -38.9196) -> (25.5, -38.9196) projected
  line L4 (25.5, -38.9196) -> (37.6774, -38.9196)
  line L5 (37.6774, -38.9196) -> (38.7421, -37.8086)
  point P0 (0, 0)
extrude "Extrusion105" cut sketch "Sketch111" against normal blind 10
sketch "Sketch114" plane through (0, 0, -0.8) normal (0, 0, -1) x (-1, 0, 0)
  line L0 (-25.5, 32) -> (-25.5, 26) projected
  line L1 (-25.5, 26) -> (-25.5, 32)
  line L2 (-25.5, 32) -> (-25.5, -13.2226)
  line L3 (-25.5, -13.2226) -> (-49.6596, -13.2226)
  line L4 (-49.6596, -30.2322) -> (-49.6596, 28) projected
  line L5 (-49.6596, 28) -> (-49.6596, -30.2322) projected
  line L6 (-49.6596, -13.2226) -> (-49.6596, 28)
  line L7 (-25.5, 32) -> (-45.6596, 32) projected
  arc A0 (-45.6596, 32) -> (-49.6596, 28) centre (-45.6596, 28) ccw projected
  arc A1 (-45.6596, 32) -> (-49.6596, 28) centre (-45.6596, 28) ccw
  line L8 (-45.6596, 32) -> (-25.5, 32)
  point P0 (0, 0)
extrude "Extrusion108" cut sketch "Sketch114" against normal blind 6
sketch "Sketch115" plane through (0, 0, -59.3) normal (0, 0, -1) x (-1, 0, 0)
  line L0 (-50.9952, -38.1245) -> (29.0048, -38.1245)
  line L1 (29.0048, -38.1245) -> (29.0048, 81.8755)
  line L2 (29.0048, 81.8755) -> (-50.9952, 81.8755)
  line L3 (-50.9952, 81.8755) -> (-50.9952, -38.1245)
  point P0 (0, 0)
  dimension "d363" = 80
  dimension "d364" = 120
sketch "Sketch116" plane through (0, 0, 5.2) normal (0, 0, 1) x (1, 0, 0)
  line L0 (25.5, -33) -> (-24.5, -33) projected
  line L1 (25.5, -33) -> (50.5194, -24.1438)
  line L2 (50.5194, -24.1438) -> (50.8592, -10.1321)
  line L3 (50.8592, -10.1321) -> (25.5, -8.1902)
  line L4 (25.5, 26) -> (25.5, -13.2226) projected
  line L5 (25.5, -27) -> (25.5, -33) projected
  line L6 (25.5, -33) -> (25.5, -8.1902)
  line L7 (25.5, -33) -> (62.3665, -33)
  line L8 (62.3665, -33) -> (62.3665, 19.7655)
  line L9 (62.3665, 19.7655) -> (25.5, 19.7655)
  line L10 (25.5, 19.7655) -> (25.5, -33)
  line L11 (62.3665, 19.7655) -> (25.5, 19.7655)
  line L12 (25.5, 19.7655) -> (25.5, -84.5573)
  line L13 (25.5, -84.5573) -> (62.3665, -84.5573)
  line L14 (62.3665, -84.5573) -> (62.3665, 19.7655)
  point P0 (0, 0)
extrude "Extrusion109" add sketch "Sketch116" along normal blind 9 and the other way blind 6 contours L5 L6 L4 L3 L2 L1
sketch "Sketch117" plane through (50.8592, -10.1321, 14.2) normal (0.9997061, -0.0242446, 0) x (0, 0, -1)
  line L0 (1.2948, -7.0247) -> (1.2483, -7.0247)
  line L1 (0, 1.3265) -> (0, -23.476) projected
  line L2 (9, -23.476) -> (9, 1.3265) projected
  circle A0 centre (5.5, -7.0247) radius 2.55
  line L3 (0, -7.0247) -> (5.5, -7.0247)
  point P0 (14.2, 8.896)
  dimension "d387" = 5.5
  dimension "d388" = 5.1
extrude "Extrusion111" cut sketch "Sketch116" against normal blind 20 contours L1 L2 L3 L4 L9 L8 L7 | L7 L14 L13 L12
sketch "Sketch118" plane through (-24.5, -33, -59.3) normal (0, -1, 0) x (1, 0, 0)
  line L0 (75.3592, 73.5) -> (50, 73.5) projected
  line L1 (50, 64.5) -> (50, 73.5) projected
  line L2 (50, 73.5) -> (50, 64.5)
  line L3 (50, 64.5) -> (25, 64.5)
  line L4 (50, 73.5) -> (25, 64.5)
  point P0 (24.5, 59.3)
  dimension "d373" = 25
extrude "Extrusion112" add sketch "Sketch118" against normal blind 24.81
sketch "Sketch119" plane through (0, 0, 5.2) normal (0, 0, 1) x (1, 0, 0)
  circle A0 centre (0, 0) radius 12.5
  dimension "d376" = 25
extrude "Extrusion113" cut sketch "Sketch119" along normal blind 24.81
sketch "Sketch120" plane through (0, 0, 5.2) normal (0, 0, 1) x (1, 0, 0)
  line L0 (0.5, -33) -> (0.5, -12.49) projected
  line L1 (0.5, -33) -> (0.5, -20.595)
  line L2 (25.5, -8.1902) -> (25.5, -8.19) projected
  line L3 (0.5, -20.595) -> (25.5, -8.19)
  line L4 (25.5, -8.19) -> (0.5, -8.19)
  line L5 (0.5, -8.19) -> (0, -20.8431)
  line L6 (0, -20.8431) -> (0.5, -20.595)
  point P0 (0, 0)
  dimension "d379" = 12.405
extrude "Extrusion114" cut sketch "Sketch120" along normal blind 24.81
extrude "Extrusion115" cut sketch "Sketch117" against normal blind 20
ref_plane "Work Plane3" through (-10.35, 26, -57) normal (0, 1, 0) x (1, 0, 0)
properties part number "C23[i3][L][T1]" material "Aluminum 6061"
